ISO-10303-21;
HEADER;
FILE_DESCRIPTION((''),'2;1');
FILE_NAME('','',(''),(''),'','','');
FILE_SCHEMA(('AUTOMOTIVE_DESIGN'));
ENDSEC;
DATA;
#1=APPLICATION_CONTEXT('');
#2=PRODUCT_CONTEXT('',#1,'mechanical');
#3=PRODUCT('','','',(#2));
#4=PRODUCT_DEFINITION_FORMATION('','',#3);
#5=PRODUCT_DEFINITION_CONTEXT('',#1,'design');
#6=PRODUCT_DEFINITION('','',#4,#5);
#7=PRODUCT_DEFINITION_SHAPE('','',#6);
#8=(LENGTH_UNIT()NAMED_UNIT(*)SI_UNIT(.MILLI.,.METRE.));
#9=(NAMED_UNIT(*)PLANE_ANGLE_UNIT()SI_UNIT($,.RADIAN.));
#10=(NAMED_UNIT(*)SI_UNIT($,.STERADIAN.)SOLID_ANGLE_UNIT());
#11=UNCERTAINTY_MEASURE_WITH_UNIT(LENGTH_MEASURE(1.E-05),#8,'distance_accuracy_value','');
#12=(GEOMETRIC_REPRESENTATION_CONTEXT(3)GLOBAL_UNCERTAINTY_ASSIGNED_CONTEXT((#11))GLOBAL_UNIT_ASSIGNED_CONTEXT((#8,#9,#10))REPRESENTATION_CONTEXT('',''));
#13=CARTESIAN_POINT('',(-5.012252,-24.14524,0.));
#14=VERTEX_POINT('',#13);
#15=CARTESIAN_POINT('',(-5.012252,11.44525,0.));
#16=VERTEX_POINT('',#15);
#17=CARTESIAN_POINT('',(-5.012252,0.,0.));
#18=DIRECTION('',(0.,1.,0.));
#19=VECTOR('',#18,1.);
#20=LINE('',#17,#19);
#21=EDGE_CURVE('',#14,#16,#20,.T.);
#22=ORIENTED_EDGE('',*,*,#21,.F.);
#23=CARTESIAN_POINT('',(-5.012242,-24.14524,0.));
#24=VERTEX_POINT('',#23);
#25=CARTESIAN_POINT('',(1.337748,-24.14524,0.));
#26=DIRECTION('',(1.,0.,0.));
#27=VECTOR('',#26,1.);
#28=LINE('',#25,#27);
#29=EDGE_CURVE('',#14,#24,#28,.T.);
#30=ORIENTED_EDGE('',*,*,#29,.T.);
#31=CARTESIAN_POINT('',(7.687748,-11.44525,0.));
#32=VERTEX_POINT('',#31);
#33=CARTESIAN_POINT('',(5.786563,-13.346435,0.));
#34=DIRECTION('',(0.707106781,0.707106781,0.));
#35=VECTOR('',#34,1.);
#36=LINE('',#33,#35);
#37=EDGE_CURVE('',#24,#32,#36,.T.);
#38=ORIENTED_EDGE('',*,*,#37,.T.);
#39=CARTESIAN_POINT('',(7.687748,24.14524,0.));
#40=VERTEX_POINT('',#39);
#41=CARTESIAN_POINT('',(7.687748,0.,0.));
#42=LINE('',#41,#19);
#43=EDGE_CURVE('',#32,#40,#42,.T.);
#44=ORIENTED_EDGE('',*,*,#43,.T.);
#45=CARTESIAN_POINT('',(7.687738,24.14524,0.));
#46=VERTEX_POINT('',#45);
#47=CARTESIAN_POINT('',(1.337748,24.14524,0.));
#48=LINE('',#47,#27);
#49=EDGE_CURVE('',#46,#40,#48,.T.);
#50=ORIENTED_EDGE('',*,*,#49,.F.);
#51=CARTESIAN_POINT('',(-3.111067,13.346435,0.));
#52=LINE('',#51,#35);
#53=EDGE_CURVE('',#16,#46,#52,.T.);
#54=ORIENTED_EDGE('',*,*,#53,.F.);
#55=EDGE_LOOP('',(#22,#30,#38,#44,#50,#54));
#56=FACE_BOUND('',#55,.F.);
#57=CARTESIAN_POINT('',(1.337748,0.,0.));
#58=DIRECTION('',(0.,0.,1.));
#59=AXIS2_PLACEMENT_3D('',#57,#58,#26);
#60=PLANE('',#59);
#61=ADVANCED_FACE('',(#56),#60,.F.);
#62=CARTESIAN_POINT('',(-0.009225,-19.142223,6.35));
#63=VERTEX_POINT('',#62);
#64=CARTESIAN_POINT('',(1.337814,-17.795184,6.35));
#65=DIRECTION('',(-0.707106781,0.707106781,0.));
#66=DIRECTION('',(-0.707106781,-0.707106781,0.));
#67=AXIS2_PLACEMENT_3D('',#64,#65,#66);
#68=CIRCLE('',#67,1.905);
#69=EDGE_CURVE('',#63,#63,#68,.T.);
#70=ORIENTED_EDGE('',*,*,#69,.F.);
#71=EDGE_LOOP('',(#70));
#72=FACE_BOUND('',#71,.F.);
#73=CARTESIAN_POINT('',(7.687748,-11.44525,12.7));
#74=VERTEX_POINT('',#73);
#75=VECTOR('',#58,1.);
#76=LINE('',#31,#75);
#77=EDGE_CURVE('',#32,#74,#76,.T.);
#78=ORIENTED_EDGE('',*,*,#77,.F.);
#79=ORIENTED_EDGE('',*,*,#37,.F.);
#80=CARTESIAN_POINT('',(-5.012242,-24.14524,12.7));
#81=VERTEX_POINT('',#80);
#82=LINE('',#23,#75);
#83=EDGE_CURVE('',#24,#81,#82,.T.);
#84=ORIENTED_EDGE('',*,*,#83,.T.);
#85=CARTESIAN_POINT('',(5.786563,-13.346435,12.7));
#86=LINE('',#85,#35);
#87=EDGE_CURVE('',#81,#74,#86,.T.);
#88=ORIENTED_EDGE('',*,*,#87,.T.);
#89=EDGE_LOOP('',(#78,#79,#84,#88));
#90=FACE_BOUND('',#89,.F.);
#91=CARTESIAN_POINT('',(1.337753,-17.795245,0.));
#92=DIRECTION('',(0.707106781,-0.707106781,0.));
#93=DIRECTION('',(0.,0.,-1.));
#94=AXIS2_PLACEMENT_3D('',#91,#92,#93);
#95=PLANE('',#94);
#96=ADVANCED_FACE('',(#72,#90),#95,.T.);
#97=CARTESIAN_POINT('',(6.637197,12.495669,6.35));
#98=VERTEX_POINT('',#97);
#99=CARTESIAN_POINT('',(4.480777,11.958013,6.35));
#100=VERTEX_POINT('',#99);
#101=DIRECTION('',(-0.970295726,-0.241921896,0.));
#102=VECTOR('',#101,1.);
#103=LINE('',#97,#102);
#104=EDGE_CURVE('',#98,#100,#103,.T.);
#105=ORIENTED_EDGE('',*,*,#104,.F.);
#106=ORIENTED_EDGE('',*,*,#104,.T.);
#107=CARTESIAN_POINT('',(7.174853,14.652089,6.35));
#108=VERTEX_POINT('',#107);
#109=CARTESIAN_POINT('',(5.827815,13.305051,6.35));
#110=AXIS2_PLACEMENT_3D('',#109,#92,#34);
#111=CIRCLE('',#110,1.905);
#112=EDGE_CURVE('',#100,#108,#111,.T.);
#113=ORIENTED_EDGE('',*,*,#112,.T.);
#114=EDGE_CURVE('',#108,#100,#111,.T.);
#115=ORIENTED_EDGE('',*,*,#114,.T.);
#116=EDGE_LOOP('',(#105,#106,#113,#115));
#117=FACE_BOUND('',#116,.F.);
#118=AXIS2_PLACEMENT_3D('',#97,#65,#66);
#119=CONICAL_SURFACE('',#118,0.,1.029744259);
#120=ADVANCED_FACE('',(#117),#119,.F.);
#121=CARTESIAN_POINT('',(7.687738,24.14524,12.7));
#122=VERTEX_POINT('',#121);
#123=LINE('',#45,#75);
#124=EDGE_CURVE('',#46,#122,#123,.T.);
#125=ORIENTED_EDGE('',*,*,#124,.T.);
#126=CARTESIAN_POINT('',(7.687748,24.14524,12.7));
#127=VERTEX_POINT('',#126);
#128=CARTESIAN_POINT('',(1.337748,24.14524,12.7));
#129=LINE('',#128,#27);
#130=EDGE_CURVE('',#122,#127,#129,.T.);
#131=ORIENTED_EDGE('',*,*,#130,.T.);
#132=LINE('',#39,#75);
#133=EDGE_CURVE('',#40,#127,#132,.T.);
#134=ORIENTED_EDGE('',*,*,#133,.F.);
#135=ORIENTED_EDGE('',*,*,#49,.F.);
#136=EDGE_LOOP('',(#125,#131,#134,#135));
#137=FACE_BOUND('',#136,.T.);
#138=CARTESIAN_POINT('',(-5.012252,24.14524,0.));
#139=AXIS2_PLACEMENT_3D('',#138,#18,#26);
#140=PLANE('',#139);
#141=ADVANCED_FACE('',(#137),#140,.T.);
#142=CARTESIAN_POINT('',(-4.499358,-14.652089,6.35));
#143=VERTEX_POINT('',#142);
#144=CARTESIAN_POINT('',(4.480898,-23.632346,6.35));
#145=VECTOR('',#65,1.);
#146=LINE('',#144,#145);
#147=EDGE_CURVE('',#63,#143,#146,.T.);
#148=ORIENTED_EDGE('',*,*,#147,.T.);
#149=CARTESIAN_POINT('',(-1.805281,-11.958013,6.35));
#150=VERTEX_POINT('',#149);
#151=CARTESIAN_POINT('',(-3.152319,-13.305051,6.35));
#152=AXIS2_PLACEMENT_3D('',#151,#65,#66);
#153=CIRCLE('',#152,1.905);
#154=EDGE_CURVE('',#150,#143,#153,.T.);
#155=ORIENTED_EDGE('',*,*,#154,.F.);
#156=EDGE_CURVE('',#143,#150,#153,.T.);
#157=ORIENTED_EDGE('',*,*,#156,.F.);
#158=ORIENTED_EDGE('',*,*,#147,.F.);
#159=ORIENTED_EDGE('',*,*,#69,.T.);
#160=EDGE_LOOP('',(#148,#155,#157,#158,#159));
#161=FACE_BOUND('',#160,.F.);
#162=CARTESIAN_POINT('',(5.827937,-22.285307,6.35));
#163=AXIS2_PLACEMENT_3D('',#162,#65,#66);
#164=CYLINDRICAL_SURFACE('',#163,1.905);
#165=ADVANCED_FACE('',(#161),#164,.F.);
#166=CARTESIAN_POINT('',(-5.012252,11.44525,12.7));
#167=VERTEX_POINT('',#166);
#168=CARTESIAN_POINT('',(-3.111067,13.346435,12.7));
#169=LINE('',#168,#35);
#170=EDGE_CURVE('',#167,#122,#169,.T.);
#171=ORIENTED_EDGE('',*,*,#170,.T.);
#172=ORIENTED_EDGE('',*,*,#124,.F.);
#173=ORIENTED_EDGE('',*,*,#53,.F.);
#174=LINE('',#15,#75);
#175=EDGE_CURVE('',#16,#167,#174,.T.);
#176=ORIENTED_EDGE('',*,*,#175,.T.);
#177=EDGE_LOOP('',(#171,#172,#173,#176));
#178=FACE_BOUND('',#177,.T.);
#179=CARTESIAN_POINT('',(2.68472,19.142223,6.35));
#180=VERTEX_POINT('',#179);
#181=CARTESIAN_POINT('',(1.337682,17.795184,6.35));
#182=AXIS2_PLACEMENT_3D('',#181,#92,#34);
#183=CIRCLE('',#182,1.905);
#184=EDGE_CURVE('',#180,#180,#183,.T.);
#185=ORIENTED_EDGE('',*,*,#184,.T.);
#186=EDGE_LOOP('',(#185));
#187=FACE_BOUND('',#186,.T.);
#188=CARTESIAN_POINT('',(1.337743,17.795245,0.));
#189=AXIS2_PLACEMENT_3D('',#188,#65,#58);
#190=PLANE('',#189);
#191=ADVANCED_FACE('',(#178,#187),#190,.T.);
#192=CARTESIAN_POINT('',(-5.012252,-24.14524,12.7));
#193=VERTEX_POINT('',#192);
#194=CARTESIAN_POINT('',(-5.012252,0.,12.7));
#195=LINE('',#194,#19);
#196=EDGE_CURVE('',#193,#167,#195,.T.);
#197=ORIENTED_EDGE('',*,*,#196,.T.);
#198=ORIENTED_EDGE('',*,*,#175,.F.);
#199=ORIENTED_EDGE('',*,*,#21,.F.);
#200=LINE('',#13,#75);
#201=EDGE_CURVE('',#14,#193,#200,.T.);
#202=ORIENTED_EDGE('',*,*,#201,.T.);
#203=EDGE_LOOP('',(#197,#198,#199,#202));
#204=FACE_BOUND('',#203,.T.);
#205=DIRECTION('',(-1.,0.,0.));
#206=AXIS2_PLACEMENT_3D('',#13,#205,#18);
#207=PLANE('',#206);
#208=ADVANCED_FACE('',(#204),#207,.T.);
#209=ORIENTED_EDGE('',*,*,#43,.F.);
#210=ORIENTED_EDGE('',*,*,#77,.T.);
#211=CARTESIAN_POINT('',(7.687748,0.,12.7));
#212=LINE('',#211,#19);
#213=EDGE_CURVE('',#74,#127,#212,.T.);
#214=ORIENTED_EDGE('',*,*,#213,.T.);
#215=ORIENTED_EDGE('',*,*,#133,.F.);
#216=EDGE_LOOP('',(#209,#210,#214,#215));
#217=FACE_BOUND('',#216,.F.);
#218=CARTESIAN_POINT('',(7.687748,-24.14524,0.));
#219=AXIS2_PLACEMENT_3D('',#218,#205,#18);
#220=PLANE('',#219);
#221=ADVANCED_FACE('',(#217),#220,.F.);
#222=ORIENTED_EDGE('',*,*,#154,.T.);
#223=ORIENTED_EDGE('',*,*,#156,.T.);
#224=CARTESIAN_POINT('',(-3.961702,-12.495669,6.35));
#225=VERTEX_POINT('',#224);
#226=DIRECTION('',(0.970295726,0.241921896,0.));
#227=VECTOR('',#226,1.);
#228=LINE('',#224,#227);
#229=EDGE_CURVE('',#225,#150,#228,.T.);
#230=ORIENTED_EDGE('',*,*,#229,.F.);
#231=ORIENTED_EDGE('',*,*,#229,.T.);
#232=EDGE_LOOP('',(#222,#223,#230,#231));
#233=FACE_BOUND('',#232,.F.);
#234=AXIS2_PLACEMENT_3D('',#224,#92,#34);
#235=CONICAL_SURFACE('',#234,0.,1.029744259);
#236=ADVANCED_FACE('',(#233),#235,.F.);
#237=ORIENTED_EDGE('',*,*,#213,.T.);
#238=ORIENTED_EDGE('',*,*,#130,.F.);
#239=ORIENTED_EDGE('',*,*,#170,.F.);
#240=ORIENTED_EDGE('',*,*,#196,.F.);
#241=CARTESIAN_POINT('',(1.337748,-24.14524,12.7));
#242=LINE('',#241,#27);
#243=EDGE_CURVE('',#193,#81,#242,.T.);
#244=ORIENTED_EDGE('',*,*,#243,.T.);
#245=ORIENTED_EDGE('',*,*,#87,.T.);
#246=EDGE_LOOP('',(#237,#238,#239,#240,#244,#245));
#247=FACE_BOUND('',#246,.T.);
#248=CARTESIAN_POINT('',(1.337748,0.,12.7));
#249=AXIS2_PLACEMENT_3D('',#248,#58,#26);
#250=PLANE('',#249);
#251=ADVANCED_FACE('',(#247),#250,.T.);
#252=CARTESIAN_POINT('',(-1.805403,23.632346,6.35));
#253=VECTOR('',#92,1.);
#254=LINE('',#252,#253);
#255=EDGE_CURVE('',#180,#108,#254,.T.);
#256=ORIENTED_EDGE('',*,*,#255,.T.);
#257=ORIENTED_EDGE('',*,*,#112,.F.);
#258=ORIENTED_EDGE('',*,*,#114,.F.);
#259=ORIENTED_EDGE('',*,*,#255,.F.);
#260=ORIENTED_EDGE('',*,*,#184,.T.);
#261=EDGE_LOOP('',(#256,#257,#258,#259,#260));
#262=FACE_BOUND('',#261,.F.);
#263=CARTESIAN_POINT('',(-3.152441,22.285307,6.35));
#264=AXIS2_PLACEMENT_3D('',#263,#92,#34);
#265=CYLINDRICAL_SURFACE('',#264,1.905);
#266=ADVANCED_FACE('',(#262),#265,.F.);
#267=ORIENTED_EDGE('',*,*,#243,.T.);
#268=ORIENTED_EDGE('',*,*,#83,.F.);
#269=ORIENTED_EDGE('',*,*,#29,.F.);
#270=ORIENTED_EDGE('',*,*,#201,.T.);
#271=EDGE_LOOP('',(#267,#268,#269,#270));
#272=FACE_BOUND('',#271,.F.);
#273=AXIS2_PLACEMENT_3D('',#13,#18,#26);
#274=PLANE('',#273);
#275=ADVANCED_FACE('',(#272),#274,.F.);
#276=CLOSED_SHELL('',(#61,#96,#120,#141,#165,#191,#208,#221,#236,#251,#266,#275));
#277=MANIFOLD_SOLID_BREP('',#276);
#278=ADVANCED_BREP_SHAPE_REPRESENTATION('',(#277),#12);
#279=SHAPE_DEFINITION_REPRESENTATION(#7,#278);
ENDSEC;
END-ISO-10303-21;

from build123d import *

# Parameters (mm, degrees)
F0_W           = 12.7
F0_H           = 48.29048
F1_DEPTH       = 12.7
F2_SIZE2       = 12.69999
F2_SIZE        = 12.69999
F3_SIZE2       = 12.69999
F3_SIZE        = 12.69999
F6_D           = 3.81
F6_DEPTH       = 6.35
F6_TIP         = 1.1446394792
F6_ON_F4_D     = 3.81
F6_ON_F4_DEPTH = 6.35
F6_ON_F4_TIP   = 1.1446394792


# Not quite as in the source:
# - a fillet or chamfer is up to 0.001 mm smaller than in the source, because OpenCascade refuses the exact size


with BuildPart() as f1:
    # F0 (on Top) → F1 (new body)
    with BuildSketch(Plane.XY):
        with Locations((1.3377478731, 0)):
            Rectangle(F0_W, F0_H)
    extrude(amount=F1_DEPTH)

    # F2 (size 12.7 and 12.7 in the source; OpenCascade refuses exactly that, so slightly less here)
    f2_edges = [f1.edges().sort_by_distance(p)[0] for p in [
        (7.687748, -24.14524, 6.35),
    ]]
    chamfer(f2_edges, length=F2_SIZE, length2=F2_SIZE2)

    # F3 (size 12.7 and 12.7 in the source; OpenCascade refuses exactly that, so slightly less here)
    f3_edges = [f1.edges().sort_by_distance(p)[0] for p in [
        (-5.012252, 24.14524, 6.35),
    ]]
    chamfer(f3_edges, length=F3_SIZE, length2=F3_SIZE2)

    # F6
    with Locations(Plane(origin=(9.5664939365, -9.5664939365, 0), x_dir=(0.7071067812, 0.7071067812, 0), z_dir=(0.7071067812, -0.7071067812, 0))):
        with Locations((-11.6371181632, 6.35)):
            Hole(F6_D / 2, depth=F6_DEPTH)
            with Locations((0, 0, -(F6_DEPTH + F6_TIP / 2))):  # 118° drill point
                Cone(0, F6_D / 2, F6_TIP, mode=Mode.SUBTRACT)

    # F6 on F4
    with Locations(Plane(origin=(-8.2287460635, 8.2287460635, 0), x_dir=(-0.7071067812, -0.7071067812, 0), z_dir=(-0.7071067812, 0.7071067812, 0))):
        with Locations((-13.5289793484, 6.35)):
            Hole(F6_ON_F4_D / 2, depth=F6_ON_F4_DEPTH)
            with Locations((0, 0, -(F6_ON_F4_DEPTH + F6_ON_F4_TIP / 2))):  # 118° drill point
                Cone(0, F6_ON_F4_D / 2, F6_ON_F4_TIP, mode=Mode.SUBTRACT)


solid = f1.part
